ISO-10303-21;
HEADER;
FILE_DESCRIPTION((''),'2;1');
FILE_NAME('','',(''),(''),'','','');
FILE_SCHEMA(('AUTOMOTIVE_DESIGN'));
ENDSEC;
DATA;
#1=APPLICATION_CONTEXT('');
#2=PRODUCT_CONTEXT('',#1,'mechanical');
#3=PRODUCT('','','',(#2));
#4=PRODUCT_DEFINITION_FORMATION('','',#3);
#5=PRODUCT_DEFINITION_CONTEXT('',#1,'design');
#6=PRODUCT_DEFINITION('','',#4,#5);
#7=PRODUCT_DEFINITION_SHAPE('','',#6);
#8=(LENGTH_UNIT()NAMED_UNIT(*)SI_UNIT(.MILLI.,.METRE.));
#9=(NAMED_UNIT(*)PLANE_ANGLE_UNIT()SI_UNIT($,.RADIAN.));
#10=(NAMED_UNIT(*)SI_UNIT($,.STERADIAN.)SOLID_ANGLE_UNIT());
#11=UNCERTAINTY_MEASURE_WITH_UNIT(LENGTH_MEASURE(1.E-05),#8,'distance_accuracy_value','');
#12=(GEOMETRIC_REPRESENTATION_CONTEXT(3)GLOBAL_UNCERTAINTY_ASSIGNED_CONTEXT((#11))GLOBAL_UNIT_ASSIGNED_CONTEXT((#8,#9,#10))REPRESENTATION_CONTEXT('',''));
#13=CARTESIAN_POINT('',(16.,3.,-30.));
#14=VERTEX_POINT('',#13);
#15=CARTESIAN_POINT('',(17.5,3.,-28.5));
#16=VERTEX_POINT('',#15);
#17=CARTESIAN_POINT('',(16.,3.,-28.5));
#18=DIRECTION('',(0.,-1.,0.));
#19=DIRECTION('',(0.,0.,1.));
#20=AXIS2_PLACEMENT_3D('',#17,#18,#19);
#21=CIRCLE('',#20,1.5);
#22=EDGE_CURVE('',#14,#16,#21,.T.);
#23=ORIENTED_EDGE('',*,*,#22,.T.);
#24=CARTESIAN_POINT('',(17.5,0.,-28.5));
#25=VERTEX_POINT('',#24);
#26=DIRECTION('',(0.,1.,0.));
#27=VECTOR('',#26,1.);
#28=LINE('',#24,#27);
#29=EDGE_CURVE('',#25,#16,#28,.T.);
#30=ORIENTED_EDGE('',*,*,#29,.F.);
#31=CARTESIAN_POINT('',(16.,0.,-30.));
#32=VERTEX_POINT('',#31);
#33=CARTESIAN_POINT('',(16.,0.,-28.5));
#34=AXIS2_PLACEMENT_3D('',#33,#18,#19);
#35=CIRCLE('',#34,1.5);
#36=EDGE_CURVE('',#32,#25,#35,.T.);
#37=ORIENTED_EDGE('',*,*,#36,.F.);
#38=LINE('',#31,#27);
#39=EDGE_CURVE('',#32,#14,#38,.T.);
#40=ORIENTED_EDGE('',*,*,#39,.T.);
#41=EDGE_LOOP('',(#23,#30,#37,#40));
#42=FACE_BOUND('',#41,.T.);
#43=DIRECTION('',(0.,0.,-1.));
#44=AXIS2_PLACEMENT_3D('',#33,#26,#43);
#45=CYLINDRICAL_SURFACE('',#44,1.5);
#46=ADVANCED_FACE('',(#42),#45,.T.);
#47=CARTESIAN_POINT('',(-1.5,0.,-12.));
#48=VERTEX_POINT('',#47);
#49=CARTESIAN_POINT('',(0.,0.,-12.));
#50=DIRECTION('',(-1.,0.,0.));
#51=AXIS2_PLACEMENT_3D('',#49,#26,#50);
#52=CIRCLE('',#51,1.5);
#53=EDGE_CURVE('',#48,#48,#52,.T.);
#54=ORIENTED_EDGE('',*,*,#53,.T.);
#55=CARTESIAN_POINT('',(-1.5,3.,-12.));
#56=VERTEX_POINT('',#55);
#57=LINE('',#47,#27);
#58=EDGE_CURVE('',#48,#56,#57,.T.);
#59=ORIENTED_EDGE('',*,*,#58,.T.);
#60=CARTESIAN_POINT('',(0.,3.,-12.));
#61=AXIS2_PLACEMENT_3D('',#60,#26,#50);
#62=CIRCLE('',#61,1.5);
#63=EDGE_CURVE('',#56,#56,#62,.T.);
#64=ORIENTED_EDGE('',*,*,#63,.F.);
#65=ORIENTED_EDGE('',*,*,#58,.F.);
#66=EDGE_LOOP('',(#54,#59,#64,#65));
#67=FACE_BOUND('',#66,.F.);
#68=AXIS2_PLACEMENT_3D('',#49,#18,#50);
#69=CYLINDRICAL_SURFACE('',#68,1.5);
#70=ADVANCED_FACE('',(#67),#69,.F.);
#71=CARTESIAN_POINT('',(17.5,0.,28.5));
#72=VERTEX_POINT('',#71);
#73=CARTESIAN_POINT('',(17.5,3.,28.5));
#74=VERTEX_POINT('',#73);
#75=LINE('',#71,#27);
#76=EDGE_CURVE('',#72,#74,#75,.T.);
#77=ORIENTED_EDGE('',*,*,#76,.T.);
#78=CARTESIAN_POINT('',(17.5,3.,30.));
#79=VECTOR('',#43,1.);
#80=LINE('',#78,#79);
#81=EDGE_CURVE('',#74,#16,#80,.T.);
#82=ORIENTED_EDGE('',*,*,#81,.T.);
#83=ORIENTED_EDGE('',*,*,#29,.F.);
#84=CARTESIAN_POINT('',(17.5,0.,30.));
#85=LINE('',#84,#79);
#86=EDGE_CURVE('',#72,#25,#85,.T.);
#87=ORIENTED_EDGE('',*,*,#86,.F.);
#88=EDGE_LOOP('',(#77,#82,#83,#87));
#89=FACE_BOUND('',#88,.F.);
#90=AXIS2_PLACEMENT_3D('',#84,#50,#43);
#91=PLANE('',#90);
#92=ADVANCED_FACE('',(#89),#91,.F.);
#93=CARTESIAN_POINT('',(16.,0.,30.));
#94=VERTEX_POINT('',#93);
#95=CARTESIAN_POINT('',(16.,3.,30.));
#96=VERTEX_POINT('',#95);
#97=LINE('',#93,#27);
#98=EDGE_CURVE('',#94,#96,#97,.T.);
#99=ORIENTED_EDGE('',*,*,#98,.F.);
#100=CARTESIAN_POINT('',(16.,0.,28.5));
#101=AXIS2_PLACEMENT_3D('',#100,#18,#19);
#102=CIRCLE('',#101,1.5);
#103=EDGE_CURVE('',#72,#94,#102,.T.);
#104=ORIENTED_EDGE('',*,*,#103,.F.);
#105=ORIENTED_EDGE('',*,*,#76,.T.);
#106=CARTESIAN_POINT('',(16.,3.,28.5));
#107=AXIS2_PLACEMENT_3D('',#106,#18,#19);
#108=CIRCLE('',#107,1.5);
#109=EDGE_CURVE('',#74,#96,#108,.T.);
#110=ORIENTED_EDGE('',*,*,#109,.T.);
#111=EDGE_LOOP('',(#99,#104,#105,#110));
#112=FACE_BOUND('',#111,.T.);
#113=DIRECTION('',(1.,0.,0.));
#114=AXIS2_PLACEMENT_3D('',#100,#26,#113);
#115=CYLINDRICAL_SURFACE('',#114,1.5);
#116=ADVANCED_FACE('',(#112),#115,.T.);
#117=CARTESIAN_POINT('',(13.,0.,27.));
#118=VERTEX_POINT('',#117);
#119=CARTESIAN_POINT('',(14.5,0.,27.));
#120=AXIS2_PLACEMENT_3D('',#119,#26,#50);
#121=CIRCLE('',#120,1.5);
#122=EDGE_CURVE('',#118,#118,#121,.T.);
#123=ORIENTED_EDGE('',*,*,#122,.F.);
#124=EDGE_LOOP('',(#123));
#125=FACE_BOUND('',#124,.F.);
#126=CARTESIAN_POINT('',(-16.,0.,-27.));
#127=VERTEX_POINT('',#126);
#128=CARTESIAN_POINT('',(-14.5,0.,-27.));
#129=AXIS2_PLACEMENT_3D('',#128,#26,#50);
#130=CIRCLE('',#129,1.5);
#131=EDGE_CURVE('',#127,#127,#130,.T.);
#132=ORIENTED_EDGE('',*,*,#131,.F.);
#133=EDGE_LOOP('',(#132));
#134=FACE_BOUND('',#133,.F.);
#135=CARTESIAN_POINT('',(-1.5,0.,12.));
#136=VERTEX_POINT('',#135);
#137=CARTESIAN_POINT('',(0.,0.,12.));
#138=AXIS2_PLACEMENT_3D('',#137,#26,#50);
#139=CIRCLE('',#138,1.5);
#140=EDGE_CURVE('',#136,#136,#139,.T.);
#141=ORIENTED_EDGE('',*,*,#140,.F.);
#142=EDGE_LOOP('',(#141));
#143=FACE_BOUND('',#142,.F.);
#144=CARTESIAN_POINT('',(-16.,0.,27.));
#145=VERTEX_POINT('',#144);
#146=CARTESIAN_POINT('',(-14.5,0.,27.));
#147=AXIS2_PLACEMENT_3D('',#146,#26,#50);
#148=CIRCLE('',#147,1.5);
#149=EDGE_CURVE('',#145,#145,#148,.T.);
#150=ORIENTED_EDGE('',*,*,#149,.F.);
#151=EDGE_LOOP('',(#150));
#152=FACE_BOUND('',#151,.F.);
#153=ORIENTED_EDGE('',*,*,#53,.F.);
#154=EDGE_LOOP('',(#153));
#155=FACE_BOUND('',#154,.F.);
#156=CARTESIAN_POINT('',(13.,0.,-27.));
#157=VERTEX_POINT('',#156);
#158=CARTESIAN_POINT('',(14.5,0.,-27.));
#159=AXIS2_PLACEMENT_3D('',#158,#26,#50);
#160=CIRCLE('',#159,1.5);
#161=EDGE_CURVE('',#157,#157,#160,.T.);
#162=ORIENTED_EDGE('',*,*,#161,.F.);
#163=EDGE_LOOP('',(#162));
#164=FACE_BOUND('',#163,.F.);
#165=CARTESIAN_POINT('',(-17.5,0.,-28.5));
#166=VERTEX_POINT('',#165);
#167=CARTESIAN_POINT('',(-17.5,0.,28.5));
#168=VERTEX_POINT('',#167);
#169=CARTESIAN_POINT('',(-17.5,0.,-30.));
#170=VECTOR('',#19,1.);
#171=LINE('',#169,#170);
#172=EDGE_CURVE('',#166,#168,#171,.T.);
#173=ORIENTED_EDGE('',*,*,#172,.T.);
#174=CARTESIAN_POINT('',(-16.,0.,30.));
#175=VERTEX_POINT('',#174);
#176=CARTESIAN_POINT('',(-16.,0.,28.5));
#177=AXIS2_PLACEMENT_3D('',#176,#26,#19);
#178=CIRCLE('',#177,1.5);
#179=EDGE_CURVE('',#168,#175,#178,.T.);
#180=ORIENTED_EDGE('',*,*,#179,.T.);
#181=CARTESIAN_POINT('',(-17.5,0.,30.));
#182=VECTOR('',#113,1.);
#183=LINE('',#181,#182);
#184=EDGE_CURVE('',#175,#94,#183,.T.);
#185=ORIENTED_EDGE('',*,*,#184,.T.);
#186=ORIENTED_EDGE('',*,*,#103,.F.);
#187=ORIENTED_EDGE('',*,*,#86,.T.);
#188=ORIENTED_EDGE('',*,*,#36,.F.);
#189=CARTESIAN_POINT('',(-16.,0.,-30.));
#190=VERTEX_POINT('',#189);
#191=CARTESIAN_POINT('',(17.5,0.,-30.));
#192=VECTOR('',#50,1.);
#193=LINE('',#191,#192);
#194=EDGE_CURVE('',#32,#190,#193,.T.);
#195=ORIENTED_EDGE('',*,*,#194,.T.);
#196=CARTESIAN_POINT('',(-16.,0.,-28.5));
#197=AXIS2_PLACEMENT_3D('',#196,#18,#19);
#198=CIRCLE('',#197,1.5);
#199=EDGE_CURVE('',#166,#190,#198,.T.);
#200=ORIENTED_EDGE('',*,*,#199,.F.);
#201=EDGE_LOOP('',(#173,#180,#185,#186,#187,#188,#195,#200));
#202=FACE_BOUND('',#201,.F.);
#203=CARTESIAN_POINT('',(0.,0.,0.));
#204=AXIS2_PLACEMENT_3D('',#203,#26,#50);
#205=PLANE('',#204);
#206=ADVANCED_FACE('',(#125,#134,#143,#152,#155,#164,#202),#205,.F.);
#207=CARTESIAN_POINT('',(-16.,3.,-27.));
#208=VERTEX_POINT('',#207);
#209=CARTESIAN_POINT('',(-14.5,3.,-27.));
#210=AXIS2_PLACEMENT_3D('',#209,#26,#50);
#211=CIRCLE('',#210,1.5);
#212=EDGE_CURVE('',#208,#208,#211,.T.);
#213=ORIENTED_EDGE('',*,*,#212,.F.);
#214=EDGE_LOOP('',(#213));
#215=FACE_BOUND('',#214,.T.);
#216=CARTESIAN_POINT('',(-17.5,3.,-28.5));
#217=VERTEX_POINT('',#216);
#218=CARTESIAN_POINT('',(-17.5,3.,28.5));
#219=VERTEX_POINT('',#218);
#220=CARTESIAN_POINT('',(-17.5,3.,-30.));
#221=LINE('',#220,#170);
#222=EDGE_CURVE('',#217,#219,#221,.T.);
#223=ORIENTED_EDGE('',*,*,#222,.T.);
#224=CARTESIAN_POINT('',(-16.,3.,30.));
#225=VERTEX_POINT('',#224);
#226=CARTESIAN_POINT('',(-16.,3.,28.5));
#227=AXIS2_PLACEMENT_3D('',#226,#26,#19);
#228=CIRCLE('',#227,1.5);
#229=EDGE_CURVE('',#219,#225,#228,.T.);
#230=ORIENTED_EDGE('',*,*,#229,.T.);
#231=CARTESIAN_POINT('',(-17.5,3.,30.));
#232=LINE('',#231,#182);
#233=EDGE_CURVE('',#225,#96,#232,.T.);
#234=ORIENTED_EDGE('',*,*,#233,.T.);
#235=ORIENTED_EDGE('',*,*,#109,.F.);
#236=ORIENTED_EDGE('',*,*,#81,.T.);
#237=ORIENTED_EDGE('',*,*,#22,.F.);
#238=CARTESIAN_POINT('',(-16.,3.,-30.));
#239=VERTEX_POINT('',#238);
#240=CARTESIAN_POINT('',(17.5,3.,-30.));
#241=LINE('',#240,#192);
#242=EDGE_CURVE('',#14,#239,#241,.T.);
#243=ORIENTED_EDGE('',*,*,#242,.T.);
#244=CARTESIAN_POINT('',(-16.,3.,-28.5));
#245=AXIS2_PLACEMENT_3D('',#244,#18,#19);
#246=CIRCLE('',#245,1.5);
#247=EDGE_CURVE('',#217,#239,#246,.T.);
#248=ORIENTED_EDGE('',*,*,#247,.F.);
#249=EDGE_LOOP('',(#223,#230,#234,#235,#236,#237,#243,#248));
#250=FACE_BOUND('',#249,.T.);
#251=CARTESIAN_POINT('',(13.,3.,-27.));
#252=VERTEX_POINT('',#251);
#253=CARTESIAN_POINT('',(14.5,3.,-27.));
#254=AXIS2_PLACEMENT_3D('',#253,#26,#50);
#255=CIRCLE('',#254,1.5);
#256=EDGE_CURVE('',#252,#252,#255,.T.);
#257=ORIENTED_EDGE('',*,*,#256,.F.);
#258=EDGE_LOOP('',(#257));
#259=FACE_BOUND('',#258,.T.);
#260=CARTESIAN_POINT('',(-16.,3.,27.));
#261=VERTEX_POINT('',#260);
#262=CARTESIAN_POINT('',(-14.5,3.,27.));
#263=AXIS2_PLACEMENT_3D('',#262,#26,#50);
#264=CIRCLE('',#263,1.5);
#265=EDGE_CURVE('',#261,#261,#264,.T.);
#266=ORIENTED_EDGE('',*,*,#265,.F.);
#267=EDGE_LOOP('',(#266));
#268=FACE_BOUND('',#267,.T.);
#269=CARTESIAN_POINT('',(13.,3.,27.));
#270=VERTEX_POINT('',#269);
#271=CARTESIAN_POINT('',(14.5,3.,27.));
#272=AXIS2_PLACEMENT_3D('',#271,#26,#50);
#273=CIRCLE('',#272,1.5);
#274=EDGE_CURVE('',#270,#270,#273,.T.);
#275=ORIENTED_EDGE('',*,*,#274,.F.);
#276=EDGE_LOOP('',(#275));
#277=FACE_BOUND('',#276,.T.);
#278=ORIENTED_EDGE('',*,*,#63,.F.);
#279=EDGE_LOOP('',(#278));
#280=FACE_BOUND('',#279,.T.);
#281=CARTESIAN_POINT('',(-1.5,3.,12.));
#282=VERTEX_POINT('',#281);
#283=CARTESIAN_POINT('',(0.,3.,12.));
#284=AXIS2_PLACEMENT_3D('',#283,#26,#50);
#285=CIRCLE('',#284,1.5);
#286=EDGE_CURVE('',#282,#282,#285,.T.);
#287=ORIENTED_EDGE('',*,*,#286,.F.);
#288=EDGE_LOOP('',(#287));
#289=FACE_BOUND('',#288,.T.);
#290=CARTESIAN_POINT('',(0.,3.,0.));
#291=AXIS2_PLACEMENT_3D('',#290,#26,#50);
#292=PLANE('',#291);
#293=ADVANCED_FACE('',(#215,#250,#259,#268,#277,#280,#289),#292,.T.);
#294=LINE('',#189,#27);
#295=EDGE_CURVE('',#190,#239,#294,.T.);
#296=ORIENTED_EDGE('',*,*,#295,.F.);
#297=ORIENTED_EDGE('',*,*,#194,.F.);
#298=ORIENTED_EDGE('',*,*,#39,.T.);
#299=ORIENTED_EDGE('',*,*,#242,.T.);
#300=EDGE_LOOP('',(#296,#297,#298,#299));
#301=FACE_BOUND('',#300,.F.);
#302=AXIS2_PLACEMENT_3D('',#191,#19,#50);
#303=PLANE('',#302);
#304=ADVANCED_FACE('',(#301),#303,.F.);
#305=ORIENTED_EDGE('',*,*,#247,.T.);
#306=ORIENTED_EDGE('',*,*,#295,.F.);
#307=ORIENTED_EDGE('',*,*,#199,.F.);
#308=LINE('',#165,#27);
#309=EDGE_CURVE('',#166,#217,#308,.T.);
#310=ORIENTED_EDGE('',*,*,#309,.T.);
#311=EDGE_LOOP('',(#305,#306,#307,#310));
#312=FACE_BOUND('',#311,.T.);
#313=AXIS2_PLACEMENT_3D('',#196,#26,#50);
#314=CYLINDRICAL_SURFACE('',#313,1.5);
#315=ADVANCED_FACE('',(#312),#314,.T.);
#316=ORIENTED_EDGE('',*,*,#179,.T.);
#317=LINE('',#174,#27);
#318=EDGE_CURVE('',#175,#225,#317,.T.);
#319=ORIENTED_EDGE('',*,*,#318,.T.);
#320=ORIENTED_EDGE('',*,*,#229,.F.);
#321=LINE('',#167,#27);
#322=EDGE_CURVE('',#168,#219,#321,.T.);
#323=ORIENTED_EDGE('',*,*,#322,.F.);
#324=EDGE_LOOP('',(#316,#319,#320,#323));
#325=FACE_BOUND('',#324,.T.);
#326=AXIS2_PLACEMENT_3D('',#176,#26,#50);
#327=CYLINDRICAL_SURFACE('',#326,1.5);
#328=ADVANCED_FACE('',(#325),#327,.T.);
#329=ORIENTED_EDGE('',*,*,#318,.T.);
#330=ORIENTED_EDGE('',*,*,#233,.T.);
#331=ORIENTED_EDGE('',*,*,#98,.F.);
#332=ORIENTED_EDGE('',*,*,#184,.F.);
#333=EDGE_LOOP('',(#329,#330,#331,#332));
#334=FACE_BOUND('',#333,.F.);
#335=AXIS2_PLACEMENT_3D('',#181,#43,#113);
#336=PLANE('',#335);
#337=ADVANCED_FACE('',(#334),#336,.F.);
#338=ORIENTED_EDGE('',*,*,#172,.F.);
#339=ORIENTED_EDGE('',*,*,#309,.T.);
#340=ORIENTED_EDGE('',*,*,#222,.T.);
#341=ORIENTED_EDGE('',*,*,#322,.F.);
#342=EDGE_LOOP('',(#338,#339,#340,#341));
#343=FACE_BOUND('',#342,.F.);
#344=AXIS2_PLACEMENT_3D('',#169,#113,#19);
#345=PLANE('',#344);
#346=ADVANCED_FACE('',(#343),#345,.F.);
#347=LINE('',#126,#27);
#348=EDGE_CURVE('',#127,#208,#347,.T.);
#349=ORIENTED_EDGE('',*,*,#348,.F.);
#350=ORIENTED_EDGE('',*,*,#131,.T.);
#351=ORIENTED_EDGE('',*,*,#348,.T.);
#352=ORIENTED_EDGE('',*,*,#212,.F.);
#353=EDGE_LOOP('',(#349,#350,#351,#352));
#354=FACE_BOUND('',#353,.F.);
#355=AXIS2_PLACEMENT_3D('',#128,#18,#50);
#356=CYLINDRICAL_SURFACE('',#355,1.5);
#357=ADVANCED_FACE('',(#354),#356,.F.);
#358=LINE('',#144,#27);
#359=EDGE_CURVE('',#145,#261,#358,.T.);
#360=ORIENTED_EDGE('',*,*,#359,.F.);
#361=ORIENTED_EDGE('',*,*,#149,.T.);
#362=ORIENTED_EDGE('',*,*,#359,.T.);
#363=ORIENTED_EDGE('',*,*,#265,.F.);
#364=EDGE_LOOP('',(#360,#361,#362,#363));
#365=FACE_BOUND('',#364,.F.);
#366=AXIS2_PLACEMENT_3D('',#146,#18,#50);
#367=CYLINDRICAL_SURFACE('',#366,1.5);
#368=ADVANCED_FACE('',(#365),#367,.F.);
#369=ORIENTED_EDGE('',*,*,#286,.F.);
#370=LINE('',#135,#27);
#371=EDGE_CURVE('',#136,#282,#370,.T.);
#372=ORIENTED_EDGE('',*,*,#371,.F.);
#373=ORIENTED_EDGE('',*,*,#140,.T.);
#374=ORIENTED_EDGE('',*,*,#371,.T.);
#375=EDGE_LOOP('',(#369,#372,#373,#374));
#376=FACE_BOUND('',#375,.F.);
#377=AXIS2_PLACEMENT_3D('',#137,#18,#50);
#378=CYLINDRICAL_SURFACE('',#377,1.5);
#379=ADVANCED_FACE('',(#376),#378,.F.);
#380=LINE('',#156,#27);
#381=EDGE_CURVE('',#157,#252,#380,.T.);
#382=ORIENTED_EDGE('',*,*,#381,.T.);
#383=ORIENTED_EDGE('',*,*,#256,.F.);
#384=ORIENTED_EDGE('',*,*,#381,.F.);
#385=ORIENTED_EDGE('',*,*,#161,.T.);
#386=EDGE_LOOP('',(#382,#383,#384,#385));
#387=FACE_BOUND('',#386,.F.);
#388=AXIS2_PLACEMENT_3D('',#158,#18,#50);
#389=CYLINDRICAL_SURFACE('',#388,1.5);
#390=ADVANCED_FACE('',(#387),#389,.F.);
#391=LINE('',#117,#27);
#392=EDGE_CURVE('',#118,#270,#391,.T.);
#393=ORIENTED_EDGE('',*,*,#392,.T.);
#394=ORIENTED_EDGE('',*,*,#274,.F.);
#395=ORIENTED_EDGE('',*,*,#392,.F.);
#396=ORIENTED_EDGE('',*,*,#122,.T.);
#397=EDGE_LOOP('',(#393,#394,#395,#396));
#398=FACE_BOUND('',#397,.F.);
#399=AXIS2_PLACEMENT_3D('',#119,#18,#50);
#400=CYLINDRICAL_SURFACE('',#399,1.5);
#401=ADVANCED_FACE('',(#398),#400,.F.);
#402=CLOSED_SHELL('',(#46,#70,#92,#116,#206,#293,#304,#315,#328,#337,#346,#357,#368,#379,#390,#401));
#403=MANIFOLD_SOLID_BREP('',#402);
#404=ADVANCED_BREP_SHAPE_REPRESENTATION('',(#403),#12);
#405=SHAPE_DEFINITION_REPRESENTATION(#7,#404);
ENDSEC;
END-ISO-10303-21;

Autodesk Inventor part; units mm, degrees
ref_plane "YZ Plane" through (0, 0, 0) normal (1, 0, 0) x (0, 1, 0)
ref_plane "XZ Plane" through (0, 0, 0) normal (0, 1, 0) x (-1, 0, 0)
ref_plane "XY Plane" through (0, 0, 0) normal (0, 0, 1) x (1, 0, 0)
sketch "Sketch1" plane through (0, 0, 0) normal (0, 1, 0) x (-1, 0, 0)
  line L0 (11.5, 24) -> (-11.5, 24)
  line L1 (-11.5, 24) -> (-11.5, -24)
  line L2 (-11.5, -24) -> (11.5, -24)
  line L3 (11.5, -24) -> (11.5, 24)
  line L4 (11.5, 24) -> (-11.5, -24) construction
  line L5 (-11.5, 24) -> (11.5, -24) construction
  line L6 (-8.5, 21) -> (8.5, 21)
  line L7 (8.5, 21) -> (8.5, -21)
  line L8 (8.5, -21) -> (-8.5, -21)
  line L9 (-8.5, -21) -> (-8.5, 21)
  line L10 (-8.5, 21) -> (8.5, -21) construction
  line L11 (8.5, 21) -> (-8.5, -21) construction
  line L12 (0, 0) -> (-8.5, 0) construction
  circle A0 centre (0, -12) radius 1.5
  circle A1 centre (0, 12) radius 1.5
  line L13 (17.5, 30) -> (-17.5, 30)
  line L14 (-17.5, 30) -> (-17.5, -30)
  line L15 (-17.5, -30) -> (17.5, -30)
  line L16 (17.5, -30) -> (17.5, 30)
  line L17 (17.5, 30) -> (-17.5, -30) construction
  line L18 (-17.5, 30) -> (17.5, -30) construction
  circle A2 centre (14.5, 27) radius 1.5
  circle A3 centre (-14.5, 27) radius 1.5
  circle A4 centre (14.5, -27) radius 1.5
  circle A5 centre (-14.5, -27) radius 1.5
  dimension "d0" = 23
  dimension "d1" = 48
  dimension "d3" = 3
  dimension "d4" = 3
  dimension "d5" = 3
  dimension "d6" = 12
  dimension "d9" = 6
  dimension "d10" = 6
  dimension "d13" = 3
  dimension "d14" = 3
  dimension "d15" = 3
  dimension "d16" = 3
  dimension "d17" = 3
  dimension "d18" = 3
extrude "Extrusion1" add sketch "Sketch1" along normal blind 3 contours L3 L2 L1 L0 | L6 L7 L8 L9 | L16 L15 L14 L13
fillet "Fillet2" radius 1.5 4 edges at (17.5, 1.5, -30) (17.5, 1.5, 30) (-17.5, 1.5, 30) (-17.5, 1.5, -30)
properties part number "Top&Bottom"
